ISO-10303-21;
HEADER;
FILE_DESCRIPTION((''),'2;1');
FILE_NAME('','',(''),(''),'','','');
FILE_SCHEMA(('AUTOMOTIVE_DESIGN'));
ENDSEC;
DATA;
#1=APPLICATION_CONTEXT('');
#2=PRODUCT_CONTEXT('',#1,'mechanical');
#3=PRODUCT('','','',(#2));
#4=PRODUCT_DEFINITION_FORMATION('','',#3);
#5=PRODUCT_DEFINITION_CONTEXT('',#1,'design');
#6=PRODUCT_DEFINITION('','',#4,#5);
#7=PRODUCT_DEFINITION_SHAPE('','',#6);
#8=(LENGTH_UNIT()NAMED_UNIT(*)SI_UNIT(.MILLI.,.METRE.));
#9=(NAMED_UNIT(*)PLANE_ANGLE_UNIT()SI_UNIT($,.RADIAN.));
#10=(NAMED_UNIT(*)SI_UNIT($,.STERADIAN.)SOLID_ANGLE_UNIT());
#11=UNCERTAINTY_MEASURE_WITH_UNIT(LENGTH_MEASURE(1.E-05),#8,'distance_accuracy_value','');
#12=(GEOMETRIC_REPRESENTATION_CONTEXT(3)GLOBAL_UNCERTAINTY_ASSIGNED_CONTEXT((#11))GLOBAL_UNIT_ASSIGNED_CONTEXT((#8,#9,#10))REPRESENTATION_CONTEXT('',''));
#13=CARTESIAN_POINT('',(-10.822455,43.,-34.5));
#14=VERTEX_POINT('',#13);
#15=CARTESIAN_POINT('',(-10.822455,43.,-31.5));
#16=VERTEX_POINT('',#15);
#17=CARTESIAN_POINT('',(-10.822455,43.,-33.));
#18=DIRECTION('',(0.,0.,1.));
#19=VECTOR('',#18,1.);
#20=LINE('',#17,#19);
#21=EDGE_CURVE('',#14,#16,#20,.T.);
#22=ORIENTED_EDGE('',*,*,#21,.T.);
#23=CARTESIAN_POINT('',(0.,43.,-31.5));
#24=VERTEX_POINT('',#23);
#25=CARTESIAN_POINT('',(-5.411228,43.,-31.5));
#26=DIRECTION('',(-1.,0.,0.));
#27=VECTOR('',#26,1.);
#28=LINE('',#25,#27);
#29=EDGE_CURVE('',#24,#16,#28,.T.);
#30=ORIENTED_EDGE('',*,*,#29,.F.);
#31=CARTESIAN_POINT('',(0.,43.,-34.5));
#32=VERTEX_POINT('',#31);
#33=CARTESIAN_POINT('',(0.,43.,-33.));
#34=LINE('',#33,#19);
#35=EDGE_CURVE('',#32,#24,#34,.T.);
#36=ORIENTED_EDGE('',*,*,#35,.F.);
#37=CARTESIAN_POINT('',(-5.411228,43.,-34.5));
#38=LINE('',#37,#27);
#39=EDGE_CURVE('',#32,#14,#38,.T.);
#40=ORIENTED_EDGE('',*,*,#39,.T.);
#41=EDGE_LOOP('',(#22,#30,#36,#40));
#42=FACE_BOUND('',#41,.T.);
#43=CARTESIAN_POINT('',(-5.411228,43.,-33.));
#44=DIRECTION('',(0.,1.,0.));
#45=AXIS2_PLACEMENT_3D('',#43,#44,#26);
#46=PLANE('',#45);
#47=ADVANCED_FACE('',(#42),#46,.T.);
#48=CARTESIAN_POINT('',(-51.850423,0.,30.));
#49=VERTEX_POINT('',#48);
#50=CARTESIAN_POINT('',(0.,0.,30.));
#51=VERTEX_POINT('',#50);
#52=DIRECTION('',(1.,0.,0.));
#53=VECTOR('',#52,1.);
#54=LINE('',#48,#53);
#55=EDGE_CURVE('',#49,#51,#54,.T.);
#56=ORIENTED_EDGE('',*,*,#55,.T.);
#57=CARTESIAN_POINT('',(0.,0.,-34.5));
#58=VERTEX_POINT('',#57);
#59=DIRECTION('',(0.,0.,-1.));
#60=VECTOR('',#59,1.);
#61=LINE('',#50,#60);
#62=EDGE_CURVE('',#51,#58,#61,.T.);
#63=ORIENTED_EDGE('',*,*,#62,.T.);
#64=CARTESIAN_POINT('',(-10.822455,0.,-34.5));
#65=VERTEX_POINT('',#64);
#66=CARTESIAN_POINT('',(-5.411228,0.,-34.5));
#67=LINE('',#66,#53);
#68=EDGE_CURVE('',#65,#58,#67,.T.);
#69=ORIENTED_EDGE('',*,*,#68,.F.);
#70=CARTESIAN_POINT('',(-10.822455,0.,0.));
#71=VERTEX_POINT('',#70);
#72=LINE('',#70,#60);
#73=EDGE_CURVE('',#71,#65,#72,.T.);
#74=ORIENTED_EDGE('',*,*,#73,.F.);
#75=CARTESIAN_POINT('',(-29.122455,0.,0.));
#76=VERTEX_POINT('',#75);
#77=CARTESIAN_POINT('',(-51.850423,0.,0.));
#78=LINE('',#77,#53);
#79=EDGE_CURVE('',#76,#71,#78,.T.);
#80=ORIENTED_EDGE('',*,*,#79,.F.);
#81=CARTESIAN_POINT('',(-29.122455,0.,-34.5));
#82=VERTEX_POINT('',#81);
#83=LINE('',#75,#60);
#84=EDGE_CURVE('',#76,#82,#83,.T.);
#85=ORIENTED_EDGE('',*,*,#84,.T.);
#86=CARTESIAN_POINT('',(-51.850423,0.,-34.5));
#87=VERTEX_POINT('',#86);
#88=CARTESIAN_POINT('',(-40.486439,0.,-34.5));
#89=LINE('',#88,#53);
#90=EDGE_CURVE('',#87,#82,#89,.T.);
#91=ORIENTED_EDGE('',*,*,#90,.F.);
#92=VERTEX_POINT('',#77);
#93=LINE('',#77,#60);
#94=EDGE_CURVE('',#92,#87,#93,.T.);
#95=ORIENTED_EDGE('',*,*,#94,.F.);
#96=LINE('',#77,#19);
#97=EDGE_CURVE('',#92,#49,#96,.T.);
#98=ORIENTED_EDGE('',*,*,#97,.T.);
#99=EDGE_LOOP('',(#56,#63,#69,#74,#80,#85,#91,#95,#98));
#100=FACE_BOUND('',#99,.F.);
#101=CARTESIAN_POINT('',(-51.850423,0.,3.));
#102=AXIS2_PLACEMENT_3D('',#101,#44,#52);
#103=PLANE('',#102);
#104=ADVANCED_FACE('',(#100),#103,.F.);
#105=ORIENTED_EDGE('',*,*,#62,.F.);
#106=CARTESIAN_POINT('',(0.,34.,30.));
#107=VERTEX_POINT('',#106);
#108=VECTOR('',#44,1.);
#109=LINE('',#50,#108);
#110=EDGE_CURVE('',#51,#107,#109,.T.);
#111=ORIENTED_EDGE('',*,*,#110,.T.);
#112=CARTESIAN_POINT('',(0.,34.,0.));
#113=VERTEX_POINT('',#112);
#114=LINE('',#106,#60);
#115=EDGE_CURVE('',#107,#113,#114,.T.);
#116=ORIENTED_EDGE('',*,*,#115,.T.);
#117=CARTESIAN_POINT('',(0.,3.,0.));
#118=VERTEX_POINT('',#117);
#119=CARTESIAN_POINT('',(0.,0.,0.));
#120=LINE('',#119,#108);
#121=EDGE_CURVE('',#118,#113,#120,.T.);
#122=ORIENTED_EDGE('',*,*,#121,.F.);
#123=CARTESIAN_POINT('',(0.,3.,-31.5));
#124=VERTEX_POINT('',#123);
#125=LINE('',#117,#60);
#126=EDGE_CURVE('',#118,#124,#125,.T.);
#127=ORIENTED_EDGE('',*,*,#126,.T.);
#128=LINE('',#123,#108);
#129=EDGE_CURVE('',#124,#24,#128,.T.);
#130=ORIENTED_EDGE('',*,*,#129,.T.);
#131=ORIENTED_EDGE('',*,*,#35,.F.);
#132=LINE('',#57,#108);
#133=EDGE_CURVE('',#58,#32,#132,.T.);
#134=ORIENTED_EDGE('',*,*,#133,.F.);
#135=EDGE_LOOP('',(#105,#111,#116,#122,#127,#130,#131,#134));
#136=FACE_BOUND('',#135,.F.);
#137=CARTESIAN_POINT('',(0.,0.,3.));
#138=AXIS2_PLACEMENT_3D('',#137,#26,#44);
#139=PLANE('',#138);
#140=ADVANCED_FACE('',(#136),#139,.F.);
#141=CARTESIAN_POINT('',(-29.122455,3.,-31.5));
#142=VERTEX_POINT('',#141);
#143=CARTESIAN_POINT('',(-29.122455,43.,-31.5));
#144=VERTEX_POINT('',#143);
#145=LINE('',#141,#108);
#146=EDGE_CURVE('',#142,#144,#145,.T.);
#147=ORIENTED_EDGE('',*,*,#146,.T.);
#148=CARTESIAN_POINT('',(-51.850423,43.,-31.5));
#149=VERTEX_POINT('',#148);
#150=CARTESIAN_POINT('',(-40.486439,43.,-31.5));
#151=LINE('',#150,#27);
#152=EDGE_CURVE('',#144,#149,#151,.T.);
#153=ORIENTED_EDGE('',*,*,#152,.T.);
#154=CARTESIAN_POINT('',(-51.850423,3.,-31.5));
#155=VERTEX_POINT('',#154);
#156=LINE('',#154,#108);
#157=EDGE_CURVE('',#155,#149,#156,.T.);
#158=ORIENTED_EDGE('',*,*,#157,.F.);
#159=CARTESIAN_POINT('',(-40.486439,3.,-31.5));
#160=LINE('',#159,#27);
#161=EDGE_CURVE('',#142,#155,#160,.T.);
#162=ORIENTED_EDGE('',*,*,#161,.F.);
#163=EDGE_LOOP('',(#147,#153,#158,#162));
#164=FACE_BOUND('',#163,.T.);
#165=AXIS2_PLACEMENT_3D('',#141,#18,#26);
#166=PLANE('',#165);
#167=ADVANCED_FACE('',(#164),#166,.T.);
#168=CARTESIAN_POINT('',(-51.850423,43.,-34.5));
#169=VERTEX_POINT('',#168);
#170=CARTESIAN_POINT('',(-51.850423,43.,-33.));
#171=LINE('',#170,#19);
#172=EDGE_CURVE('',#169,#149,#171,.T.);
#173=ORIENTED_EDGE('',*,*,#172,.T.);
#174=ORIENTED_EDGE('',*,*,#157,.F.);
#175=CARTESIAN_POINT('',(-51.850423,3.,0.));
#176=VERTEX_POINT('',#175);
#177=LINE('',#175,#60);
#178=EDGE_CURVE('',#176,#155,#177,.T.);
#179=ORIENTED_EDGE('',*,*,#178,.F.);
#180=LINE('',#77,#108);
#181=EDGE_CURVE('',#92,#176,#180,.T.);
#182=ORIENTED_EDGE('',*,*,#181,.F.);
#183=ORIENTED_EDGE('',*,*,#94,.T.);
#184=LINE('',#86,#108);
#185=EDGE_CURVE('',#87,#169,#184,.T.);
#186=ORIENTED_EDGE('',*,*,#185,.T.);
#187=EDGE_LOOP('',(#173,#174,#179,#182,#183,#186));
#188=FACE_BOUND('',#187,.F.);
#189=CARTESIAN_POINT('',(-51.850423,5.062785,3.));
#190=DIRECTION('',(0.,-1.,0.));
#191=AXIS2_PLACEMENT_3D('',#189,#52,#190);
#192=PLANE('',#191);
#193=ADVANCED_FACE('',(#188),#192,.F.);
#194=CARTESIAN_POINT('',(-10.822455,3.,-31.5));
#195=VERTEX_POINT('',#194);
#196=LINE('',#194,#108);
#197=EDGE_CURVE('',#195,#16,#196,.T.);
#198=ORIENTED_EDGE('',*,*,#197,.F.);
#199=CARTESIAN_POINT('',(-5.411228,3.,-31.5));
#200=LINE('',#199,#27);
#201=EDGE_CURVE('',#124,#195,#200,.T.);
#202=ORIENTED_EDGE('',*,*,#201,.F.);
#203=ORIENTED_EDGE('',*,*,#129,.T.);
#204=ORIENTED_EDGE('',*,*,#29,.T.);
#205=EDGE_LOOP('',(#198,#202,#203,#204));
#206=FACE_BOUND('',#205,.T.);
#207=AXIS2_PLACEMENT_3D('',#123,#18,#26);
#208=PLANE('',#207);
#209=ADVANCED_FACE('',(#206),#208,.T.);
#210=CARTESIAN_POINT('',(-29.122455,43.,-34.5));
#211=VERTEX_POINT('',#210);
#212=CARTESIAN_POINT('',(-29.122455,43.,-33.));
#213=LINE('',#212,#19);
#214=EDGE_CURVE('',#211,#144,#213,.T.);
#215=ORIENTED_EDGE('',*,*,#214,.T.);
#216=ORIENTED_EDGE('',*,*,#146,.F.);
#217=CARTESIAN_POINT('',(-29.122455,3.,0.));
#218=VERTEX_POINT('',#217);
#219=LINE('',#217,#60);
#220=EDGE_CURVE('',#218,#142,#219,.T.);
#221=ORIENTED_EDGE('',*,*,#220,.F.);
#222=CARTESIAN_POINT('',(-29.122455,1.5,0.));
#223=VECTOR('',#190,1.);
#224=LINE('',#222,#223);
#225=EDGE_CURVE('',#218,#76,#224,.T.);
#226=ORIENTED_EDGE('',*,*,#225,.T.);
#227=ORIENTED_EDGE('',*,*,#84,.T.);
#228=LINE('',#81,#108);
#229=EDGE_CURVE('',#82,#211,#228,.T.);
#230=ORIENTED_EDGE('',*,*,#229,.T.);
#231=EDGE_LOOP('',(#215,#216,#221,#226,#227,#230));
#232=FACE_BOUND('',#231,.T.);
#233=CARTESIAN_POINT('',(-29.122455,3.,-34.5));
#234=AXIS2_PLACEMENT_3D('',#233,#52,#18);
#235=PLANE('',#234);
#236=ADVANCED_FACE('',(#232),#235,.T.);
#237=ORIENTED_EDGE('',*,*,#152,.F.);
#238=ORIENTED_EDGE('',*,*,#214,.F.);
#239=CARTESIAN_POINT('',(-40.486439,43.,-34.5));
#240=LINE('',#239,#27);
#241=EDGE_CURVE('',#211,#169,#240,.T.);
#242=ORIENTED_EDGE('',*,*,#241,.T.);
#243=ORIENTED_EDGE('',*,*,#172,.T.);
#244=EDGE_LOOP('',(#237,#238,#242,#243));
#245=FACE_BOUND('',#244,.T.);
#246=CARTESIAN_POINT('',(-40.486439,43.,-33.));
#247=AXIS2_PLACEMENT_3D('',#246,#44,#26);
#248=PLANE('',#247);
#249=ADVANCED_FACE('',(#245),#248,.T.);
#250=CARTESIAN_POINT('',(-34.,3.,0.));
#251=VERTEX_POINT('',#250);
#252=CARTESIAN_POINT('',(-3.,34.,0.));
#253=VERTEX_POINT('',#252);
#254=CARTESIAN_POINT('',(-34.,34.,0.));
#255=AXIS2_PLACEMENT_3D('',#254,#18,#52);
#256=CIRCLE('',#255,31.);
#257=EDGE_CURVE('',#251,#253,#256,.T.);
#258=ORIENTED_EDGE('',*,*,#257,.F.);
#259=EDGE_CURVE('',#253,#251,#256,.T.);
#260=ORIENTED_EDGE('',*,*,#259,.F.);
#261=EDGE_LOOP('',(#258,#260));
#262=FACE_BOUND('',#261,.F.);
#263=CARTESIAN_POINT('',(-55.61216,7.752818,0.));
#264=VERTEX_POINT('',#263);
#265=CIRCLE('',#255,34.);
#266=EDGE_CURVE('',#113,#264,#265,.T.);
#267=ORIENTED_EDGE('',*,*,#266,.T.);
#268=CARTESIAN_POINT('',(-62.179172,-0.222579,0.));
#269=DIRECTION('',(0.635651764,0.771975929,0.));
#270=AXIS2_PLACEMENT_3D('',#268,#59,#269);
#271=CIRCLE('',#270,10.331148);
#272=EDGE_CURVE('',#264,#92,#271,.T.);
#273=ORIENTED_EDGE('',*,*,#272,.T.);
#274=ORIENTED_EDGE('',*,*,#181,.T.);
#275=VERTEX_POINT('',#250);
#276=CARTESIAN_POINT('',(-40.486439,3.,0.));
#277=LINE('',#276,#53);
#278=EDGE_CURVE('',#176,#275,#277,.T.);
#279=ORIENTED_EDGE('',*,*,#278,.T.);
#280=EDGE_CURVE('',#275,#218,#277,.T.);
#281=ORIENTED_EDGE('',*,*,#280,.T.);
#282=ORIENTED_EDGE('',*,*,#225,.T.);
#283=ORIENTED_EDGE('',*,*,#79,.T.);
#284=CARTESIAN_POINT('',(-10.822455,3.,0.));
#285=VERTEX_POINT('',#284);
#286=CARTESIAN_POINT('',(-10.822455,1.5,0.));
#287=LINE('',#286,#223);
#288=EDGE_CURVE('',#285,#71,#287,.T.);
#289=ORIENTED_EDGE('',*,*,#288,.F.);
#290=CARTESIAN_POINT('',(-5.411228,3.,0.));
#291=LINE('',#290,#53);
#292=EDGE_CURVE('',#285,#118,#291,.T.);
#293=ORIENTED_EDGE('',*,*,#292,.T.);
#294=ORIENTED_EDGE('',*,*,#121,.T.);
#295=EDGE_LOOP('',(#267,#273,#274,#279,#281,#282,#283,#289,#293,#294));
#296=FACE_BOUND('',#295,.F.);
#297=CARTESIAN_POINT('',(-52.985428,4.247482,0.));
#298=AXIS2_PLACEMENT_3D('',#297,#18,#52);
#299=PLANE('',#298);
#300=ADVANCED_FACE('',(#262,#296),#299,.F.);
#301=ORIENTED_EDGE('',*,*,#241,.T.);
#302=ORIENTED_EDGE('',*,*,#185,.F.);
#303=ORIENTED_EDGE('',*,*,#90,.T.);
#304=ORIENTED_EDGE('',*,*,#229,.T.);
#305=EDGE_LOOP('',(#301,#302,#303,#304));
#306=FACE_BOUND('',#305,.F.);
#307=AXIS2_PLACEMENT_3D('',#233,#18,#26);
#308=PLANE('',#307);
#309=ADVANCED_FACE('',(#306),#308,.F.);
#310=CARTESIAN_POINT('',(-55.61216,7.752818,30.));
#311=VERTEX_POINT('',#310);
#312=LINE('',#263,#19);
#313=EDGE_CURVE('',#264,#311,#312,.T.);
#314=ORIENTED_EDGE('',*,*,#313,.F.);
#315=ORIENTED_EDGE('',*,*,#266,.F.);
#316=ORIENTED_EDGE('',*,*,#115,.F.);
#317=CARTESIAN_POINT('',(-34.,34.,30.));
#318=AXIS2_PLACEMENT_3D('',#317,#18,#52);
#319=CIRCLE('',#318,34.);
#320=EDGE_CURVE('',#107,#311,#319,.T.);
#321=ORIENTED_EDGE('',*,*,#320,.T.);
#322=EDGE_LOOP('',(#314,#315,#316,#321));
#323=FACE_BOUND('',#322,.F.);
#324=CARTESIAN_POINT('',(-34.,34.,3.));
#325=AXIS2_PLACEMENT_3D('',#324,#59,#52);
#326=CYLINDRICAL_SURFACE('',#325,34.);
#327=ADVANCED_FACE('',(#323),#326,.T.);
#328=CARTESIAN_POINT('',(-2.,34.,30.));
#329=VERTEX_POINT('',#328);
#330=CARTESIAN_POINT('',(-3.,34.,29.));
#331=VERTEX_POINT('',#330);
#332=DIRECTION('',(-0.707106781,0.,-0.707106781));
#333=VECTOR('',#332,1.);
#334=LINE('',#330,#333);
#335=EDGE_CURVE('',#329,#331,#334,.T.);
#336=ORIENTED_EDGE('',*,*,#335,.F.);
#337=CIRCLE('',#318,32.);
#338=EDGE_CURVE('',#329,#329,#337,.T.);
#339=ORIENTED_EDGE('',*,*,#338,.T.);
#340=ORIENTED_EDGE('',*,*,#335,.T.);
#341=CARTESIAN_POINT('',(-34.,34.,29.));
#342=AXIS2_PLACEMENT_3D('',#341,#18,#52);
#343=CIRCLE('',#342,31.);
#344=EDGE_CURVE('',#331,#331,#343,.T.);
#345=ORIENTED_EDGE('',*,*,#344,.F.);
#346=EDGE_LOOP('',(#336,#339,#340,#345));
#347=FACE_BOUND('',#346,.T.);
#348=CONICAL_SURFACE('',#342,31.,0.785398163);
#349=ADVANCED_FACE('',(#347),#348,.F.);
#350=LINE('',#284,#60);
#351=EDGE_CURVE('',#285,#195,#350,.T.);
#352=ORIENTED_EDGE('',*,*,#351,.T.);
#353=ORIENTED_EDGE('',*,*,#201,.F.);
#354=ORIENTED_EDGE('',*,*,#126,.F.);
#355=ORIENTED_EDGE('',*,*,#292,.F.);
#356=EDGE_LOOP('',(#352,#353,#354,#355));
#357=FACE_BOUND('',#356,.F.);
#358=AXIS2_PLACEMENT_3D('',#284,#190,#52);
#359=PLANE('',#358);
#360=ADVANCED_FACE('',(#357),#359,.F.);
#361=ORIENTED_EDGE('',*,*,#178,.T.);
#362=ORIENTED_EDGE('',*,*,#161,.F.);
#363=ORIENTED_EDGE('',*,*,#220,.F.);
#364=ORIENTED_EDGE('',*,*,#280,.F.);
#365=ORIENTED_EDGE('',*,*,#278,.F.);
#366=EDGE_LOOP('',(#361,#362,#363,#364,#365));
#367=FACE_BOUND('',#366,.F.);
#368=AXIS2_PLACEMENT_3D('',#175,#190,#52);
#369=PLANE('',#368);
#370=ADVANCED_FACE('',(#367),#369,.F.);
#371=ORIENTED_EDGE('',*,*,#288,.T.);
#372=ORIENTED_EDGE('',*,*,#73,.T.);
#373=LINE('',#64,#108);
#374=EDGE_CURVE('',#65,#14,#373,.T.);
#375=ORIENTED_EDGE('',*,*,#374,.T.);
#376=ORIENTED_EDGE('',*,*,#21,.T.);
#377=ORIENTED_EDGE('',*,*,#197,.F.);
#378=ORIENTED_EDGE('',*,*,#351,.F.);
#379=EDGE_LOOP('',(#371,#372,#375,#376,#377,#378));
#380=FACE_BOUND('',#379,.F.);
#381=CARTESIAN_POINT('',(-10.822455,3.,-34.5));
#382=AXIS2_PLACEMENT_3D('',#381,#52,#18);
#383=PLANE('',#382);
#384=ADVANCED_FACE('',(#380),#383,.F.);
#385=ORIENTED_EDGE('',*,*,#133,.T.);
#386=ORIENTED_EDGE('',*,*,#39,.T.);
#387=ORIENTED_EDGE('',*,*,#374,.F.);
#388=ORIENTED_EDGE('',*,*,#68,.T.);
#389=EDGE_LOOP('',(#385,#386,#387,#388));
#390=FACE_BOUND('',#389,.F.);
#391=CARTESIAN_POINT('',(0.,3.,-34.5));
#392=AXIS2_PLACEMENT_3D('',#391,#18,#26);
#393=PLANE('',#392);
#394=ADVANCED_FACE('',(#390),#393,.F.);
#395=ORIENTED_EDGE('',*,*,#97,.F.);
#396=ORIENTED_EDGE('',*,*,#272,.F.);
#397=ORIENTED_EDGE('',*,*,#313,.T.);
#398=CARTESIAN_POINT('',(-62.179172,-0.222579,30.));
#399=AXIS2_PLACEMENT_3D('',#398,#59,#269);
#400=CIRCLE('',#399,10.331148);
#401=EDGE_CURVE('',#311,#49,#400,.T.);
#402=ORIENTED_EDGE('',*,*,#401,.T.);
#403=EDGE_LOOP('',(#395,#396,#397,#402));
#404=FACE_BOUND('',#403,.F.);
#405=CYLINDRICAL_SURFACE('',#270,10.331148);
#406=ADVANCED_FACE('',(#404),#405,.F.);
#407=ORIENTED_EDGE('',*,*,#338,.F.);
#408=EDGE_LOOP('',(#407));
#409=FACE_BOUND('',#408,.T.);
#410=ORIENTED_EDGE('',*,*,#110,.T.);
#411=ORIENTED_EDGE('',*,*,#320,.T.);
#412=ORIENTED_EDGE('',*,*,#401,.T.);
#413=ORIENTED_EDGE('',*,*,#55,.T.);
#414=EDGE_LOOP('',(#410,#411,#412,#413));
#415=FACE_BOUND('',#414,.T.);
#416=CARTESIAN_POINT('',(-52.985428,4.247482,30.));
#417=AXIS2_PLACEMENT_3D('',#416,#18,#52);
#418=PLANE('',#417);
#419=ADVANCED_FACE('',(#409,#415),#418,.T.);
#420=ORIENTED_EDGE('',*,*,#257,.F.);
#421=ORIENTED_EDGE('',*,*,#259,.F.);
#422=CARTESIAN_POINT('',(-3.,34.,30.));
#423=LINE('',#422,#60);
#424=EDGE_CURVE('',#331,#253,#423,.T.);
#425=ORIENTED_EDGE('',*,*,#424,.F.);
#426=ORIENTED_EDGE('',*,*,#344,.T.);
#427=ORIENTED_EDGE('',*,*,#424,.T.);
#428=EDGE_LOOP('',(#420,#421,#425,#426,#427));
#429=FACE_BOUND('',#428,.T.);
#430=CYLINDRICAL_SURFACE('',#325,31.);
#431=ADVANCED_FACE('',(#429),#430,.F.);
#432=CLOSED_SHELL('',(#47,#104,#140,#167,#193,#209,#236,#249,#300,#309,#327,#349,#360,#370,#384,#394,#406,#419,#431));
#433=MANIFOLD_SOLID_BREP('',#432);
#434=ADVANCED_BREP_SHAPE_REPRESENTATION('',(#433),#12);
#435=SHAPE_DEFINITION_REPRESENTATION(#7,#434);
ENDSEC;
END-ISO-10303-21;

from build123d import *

# Parameters (mm, degrees)
F0_R        = 31
F1_DEPTH    = 3
F2_W        = 22.7279674787
F2_H        = 3
F2_W_2      = 10.8224550456
F3_DEPTH    = 34.5
F4_W        = 10.8224550456
F4_H        = 3
F5_DEPTH    = 40
F6_W        = 22.7279674787
F6_H        = 3
F7_DEPTH    = 40
F8_DEPTH    = 27
F9_T1_DEPTH = 30
F10_SIZE    = 1


# Not quite as in the source:
# - a fillet or chamfer that OpenCascade refuses, or shapes differently, is made with other operations: its cross-section is extruded or revolved along the edge and cut away or added


with BuildPart() as f1:
    # F0 (on Top) → F1 (new body)
    with BuildSketch(Plane.XY):
        with BuildLine():
            ThreePointArc((-34, 0), (-9.9583694397, 9.9583694397), (0, 34))
            ThreePointArc((0, 34), (-50.5693336344, 63.6893446023), (-51.8504225243, 5.0627849352))
            ThreePointArc((-51.8504225243, 5.0627849352), (-43.2772487246, 1.2901749301), (-34, 0))
        make_face()
        with Locations((-34, 34)):
            Circle(F0_R, mode=Mode.SUBTRACT)
        with BuildLine():
            ThreePointArc((-34, 0), (-43.2772487246, 1.2901749301), (-51.8504225243, 5.0627849352))
            Line((-51.8504225243, 5.0627849352), (-51.8504225243, 0))
            Line((-51.8504225243, 0), (-34, 0))
        make_face()
        with BuildLine():
            Line((0, 0), (0, 34))
            ThreePointArc((0, 34), (-9.9583694397, 9.9583694397), (-34, 0))
            Line((-34, 0), (0, 0))
        make_face()
    extrude(amount=F1_DEPTH)

    # F2 (on face) → F3 (join)
    with BuildSketch(Plane(origin=(0, 0, 0), x_dir=(1, 0, 0), z_dir=(0, 0, -1))):
        with Locations((-40.4864387849, -1.5)):
            Rectangle(F2_W, F2_H)
        with Locations((-5.4112275228, -1.5)):
            Rectangle(F2_W_2, F2_H)
    extrude(amount=F3_DEPTH)

    # F4 (on face) → F5 (join)
    with BuildSketch(Plane(origin=(0, 3, 0), x_dir=(-1, 0, 0), z_dir=(0, 1, 0))):
        with Locations((5.4112275228, -33)):
            Rectangle(F4_W, F4_H)
    extrude(amount=F5_DEPTH)

    # F6 (on face) → F7 (join)
    with BuildSketch(Plane(origin=(0, 3, 0), x_dir=(-1, 0, 0), z_dir=(0, 1, 0))):
        with Locations((40.4864387849, -33)):
            Rectangle(F6_W, F6_H)
    extrude(amount=F7_DEPTH)

    # F8 (add): a face of the model
    f8_faces = [f1.faces().sort_by_distance(p)[0] for p in [
        (-50.1006821075, 62.8496031264, 3),
    ]]
    extrude(f8_faces, amount=F8_DEPTH)

    # F9: fillet of radius 10.3311475389 on 1 edges, made by hand

    # F9_s2 → F9_t1 (join)
    with BuildSketch(Plane.XY):
        with BuildLine():
            ThreePointArc((-55.6121599632, 7.7528184042), (-52.8843757474, 4.2873402421), (-51.8504225243, 0))
            Line((-51.8504225243, 0), (-51.8504225243, 5.0627849352))
            ThreePointArc((-51.8504225243, 5.0627849352), (-53.7770807796, 6.3437696741), (-55.6121599632, 7.7528184042))
        make_face()
    extrude(amount=F9_T1_DEPTH)

    # F10
    f10_edges = [f1.edges().sort_by_distance(p)[0] for p in [
        (-65, 34, 30),
    ]]
    chamfer(f10_edges, length=F10_SIZE)


solid = f1.part
